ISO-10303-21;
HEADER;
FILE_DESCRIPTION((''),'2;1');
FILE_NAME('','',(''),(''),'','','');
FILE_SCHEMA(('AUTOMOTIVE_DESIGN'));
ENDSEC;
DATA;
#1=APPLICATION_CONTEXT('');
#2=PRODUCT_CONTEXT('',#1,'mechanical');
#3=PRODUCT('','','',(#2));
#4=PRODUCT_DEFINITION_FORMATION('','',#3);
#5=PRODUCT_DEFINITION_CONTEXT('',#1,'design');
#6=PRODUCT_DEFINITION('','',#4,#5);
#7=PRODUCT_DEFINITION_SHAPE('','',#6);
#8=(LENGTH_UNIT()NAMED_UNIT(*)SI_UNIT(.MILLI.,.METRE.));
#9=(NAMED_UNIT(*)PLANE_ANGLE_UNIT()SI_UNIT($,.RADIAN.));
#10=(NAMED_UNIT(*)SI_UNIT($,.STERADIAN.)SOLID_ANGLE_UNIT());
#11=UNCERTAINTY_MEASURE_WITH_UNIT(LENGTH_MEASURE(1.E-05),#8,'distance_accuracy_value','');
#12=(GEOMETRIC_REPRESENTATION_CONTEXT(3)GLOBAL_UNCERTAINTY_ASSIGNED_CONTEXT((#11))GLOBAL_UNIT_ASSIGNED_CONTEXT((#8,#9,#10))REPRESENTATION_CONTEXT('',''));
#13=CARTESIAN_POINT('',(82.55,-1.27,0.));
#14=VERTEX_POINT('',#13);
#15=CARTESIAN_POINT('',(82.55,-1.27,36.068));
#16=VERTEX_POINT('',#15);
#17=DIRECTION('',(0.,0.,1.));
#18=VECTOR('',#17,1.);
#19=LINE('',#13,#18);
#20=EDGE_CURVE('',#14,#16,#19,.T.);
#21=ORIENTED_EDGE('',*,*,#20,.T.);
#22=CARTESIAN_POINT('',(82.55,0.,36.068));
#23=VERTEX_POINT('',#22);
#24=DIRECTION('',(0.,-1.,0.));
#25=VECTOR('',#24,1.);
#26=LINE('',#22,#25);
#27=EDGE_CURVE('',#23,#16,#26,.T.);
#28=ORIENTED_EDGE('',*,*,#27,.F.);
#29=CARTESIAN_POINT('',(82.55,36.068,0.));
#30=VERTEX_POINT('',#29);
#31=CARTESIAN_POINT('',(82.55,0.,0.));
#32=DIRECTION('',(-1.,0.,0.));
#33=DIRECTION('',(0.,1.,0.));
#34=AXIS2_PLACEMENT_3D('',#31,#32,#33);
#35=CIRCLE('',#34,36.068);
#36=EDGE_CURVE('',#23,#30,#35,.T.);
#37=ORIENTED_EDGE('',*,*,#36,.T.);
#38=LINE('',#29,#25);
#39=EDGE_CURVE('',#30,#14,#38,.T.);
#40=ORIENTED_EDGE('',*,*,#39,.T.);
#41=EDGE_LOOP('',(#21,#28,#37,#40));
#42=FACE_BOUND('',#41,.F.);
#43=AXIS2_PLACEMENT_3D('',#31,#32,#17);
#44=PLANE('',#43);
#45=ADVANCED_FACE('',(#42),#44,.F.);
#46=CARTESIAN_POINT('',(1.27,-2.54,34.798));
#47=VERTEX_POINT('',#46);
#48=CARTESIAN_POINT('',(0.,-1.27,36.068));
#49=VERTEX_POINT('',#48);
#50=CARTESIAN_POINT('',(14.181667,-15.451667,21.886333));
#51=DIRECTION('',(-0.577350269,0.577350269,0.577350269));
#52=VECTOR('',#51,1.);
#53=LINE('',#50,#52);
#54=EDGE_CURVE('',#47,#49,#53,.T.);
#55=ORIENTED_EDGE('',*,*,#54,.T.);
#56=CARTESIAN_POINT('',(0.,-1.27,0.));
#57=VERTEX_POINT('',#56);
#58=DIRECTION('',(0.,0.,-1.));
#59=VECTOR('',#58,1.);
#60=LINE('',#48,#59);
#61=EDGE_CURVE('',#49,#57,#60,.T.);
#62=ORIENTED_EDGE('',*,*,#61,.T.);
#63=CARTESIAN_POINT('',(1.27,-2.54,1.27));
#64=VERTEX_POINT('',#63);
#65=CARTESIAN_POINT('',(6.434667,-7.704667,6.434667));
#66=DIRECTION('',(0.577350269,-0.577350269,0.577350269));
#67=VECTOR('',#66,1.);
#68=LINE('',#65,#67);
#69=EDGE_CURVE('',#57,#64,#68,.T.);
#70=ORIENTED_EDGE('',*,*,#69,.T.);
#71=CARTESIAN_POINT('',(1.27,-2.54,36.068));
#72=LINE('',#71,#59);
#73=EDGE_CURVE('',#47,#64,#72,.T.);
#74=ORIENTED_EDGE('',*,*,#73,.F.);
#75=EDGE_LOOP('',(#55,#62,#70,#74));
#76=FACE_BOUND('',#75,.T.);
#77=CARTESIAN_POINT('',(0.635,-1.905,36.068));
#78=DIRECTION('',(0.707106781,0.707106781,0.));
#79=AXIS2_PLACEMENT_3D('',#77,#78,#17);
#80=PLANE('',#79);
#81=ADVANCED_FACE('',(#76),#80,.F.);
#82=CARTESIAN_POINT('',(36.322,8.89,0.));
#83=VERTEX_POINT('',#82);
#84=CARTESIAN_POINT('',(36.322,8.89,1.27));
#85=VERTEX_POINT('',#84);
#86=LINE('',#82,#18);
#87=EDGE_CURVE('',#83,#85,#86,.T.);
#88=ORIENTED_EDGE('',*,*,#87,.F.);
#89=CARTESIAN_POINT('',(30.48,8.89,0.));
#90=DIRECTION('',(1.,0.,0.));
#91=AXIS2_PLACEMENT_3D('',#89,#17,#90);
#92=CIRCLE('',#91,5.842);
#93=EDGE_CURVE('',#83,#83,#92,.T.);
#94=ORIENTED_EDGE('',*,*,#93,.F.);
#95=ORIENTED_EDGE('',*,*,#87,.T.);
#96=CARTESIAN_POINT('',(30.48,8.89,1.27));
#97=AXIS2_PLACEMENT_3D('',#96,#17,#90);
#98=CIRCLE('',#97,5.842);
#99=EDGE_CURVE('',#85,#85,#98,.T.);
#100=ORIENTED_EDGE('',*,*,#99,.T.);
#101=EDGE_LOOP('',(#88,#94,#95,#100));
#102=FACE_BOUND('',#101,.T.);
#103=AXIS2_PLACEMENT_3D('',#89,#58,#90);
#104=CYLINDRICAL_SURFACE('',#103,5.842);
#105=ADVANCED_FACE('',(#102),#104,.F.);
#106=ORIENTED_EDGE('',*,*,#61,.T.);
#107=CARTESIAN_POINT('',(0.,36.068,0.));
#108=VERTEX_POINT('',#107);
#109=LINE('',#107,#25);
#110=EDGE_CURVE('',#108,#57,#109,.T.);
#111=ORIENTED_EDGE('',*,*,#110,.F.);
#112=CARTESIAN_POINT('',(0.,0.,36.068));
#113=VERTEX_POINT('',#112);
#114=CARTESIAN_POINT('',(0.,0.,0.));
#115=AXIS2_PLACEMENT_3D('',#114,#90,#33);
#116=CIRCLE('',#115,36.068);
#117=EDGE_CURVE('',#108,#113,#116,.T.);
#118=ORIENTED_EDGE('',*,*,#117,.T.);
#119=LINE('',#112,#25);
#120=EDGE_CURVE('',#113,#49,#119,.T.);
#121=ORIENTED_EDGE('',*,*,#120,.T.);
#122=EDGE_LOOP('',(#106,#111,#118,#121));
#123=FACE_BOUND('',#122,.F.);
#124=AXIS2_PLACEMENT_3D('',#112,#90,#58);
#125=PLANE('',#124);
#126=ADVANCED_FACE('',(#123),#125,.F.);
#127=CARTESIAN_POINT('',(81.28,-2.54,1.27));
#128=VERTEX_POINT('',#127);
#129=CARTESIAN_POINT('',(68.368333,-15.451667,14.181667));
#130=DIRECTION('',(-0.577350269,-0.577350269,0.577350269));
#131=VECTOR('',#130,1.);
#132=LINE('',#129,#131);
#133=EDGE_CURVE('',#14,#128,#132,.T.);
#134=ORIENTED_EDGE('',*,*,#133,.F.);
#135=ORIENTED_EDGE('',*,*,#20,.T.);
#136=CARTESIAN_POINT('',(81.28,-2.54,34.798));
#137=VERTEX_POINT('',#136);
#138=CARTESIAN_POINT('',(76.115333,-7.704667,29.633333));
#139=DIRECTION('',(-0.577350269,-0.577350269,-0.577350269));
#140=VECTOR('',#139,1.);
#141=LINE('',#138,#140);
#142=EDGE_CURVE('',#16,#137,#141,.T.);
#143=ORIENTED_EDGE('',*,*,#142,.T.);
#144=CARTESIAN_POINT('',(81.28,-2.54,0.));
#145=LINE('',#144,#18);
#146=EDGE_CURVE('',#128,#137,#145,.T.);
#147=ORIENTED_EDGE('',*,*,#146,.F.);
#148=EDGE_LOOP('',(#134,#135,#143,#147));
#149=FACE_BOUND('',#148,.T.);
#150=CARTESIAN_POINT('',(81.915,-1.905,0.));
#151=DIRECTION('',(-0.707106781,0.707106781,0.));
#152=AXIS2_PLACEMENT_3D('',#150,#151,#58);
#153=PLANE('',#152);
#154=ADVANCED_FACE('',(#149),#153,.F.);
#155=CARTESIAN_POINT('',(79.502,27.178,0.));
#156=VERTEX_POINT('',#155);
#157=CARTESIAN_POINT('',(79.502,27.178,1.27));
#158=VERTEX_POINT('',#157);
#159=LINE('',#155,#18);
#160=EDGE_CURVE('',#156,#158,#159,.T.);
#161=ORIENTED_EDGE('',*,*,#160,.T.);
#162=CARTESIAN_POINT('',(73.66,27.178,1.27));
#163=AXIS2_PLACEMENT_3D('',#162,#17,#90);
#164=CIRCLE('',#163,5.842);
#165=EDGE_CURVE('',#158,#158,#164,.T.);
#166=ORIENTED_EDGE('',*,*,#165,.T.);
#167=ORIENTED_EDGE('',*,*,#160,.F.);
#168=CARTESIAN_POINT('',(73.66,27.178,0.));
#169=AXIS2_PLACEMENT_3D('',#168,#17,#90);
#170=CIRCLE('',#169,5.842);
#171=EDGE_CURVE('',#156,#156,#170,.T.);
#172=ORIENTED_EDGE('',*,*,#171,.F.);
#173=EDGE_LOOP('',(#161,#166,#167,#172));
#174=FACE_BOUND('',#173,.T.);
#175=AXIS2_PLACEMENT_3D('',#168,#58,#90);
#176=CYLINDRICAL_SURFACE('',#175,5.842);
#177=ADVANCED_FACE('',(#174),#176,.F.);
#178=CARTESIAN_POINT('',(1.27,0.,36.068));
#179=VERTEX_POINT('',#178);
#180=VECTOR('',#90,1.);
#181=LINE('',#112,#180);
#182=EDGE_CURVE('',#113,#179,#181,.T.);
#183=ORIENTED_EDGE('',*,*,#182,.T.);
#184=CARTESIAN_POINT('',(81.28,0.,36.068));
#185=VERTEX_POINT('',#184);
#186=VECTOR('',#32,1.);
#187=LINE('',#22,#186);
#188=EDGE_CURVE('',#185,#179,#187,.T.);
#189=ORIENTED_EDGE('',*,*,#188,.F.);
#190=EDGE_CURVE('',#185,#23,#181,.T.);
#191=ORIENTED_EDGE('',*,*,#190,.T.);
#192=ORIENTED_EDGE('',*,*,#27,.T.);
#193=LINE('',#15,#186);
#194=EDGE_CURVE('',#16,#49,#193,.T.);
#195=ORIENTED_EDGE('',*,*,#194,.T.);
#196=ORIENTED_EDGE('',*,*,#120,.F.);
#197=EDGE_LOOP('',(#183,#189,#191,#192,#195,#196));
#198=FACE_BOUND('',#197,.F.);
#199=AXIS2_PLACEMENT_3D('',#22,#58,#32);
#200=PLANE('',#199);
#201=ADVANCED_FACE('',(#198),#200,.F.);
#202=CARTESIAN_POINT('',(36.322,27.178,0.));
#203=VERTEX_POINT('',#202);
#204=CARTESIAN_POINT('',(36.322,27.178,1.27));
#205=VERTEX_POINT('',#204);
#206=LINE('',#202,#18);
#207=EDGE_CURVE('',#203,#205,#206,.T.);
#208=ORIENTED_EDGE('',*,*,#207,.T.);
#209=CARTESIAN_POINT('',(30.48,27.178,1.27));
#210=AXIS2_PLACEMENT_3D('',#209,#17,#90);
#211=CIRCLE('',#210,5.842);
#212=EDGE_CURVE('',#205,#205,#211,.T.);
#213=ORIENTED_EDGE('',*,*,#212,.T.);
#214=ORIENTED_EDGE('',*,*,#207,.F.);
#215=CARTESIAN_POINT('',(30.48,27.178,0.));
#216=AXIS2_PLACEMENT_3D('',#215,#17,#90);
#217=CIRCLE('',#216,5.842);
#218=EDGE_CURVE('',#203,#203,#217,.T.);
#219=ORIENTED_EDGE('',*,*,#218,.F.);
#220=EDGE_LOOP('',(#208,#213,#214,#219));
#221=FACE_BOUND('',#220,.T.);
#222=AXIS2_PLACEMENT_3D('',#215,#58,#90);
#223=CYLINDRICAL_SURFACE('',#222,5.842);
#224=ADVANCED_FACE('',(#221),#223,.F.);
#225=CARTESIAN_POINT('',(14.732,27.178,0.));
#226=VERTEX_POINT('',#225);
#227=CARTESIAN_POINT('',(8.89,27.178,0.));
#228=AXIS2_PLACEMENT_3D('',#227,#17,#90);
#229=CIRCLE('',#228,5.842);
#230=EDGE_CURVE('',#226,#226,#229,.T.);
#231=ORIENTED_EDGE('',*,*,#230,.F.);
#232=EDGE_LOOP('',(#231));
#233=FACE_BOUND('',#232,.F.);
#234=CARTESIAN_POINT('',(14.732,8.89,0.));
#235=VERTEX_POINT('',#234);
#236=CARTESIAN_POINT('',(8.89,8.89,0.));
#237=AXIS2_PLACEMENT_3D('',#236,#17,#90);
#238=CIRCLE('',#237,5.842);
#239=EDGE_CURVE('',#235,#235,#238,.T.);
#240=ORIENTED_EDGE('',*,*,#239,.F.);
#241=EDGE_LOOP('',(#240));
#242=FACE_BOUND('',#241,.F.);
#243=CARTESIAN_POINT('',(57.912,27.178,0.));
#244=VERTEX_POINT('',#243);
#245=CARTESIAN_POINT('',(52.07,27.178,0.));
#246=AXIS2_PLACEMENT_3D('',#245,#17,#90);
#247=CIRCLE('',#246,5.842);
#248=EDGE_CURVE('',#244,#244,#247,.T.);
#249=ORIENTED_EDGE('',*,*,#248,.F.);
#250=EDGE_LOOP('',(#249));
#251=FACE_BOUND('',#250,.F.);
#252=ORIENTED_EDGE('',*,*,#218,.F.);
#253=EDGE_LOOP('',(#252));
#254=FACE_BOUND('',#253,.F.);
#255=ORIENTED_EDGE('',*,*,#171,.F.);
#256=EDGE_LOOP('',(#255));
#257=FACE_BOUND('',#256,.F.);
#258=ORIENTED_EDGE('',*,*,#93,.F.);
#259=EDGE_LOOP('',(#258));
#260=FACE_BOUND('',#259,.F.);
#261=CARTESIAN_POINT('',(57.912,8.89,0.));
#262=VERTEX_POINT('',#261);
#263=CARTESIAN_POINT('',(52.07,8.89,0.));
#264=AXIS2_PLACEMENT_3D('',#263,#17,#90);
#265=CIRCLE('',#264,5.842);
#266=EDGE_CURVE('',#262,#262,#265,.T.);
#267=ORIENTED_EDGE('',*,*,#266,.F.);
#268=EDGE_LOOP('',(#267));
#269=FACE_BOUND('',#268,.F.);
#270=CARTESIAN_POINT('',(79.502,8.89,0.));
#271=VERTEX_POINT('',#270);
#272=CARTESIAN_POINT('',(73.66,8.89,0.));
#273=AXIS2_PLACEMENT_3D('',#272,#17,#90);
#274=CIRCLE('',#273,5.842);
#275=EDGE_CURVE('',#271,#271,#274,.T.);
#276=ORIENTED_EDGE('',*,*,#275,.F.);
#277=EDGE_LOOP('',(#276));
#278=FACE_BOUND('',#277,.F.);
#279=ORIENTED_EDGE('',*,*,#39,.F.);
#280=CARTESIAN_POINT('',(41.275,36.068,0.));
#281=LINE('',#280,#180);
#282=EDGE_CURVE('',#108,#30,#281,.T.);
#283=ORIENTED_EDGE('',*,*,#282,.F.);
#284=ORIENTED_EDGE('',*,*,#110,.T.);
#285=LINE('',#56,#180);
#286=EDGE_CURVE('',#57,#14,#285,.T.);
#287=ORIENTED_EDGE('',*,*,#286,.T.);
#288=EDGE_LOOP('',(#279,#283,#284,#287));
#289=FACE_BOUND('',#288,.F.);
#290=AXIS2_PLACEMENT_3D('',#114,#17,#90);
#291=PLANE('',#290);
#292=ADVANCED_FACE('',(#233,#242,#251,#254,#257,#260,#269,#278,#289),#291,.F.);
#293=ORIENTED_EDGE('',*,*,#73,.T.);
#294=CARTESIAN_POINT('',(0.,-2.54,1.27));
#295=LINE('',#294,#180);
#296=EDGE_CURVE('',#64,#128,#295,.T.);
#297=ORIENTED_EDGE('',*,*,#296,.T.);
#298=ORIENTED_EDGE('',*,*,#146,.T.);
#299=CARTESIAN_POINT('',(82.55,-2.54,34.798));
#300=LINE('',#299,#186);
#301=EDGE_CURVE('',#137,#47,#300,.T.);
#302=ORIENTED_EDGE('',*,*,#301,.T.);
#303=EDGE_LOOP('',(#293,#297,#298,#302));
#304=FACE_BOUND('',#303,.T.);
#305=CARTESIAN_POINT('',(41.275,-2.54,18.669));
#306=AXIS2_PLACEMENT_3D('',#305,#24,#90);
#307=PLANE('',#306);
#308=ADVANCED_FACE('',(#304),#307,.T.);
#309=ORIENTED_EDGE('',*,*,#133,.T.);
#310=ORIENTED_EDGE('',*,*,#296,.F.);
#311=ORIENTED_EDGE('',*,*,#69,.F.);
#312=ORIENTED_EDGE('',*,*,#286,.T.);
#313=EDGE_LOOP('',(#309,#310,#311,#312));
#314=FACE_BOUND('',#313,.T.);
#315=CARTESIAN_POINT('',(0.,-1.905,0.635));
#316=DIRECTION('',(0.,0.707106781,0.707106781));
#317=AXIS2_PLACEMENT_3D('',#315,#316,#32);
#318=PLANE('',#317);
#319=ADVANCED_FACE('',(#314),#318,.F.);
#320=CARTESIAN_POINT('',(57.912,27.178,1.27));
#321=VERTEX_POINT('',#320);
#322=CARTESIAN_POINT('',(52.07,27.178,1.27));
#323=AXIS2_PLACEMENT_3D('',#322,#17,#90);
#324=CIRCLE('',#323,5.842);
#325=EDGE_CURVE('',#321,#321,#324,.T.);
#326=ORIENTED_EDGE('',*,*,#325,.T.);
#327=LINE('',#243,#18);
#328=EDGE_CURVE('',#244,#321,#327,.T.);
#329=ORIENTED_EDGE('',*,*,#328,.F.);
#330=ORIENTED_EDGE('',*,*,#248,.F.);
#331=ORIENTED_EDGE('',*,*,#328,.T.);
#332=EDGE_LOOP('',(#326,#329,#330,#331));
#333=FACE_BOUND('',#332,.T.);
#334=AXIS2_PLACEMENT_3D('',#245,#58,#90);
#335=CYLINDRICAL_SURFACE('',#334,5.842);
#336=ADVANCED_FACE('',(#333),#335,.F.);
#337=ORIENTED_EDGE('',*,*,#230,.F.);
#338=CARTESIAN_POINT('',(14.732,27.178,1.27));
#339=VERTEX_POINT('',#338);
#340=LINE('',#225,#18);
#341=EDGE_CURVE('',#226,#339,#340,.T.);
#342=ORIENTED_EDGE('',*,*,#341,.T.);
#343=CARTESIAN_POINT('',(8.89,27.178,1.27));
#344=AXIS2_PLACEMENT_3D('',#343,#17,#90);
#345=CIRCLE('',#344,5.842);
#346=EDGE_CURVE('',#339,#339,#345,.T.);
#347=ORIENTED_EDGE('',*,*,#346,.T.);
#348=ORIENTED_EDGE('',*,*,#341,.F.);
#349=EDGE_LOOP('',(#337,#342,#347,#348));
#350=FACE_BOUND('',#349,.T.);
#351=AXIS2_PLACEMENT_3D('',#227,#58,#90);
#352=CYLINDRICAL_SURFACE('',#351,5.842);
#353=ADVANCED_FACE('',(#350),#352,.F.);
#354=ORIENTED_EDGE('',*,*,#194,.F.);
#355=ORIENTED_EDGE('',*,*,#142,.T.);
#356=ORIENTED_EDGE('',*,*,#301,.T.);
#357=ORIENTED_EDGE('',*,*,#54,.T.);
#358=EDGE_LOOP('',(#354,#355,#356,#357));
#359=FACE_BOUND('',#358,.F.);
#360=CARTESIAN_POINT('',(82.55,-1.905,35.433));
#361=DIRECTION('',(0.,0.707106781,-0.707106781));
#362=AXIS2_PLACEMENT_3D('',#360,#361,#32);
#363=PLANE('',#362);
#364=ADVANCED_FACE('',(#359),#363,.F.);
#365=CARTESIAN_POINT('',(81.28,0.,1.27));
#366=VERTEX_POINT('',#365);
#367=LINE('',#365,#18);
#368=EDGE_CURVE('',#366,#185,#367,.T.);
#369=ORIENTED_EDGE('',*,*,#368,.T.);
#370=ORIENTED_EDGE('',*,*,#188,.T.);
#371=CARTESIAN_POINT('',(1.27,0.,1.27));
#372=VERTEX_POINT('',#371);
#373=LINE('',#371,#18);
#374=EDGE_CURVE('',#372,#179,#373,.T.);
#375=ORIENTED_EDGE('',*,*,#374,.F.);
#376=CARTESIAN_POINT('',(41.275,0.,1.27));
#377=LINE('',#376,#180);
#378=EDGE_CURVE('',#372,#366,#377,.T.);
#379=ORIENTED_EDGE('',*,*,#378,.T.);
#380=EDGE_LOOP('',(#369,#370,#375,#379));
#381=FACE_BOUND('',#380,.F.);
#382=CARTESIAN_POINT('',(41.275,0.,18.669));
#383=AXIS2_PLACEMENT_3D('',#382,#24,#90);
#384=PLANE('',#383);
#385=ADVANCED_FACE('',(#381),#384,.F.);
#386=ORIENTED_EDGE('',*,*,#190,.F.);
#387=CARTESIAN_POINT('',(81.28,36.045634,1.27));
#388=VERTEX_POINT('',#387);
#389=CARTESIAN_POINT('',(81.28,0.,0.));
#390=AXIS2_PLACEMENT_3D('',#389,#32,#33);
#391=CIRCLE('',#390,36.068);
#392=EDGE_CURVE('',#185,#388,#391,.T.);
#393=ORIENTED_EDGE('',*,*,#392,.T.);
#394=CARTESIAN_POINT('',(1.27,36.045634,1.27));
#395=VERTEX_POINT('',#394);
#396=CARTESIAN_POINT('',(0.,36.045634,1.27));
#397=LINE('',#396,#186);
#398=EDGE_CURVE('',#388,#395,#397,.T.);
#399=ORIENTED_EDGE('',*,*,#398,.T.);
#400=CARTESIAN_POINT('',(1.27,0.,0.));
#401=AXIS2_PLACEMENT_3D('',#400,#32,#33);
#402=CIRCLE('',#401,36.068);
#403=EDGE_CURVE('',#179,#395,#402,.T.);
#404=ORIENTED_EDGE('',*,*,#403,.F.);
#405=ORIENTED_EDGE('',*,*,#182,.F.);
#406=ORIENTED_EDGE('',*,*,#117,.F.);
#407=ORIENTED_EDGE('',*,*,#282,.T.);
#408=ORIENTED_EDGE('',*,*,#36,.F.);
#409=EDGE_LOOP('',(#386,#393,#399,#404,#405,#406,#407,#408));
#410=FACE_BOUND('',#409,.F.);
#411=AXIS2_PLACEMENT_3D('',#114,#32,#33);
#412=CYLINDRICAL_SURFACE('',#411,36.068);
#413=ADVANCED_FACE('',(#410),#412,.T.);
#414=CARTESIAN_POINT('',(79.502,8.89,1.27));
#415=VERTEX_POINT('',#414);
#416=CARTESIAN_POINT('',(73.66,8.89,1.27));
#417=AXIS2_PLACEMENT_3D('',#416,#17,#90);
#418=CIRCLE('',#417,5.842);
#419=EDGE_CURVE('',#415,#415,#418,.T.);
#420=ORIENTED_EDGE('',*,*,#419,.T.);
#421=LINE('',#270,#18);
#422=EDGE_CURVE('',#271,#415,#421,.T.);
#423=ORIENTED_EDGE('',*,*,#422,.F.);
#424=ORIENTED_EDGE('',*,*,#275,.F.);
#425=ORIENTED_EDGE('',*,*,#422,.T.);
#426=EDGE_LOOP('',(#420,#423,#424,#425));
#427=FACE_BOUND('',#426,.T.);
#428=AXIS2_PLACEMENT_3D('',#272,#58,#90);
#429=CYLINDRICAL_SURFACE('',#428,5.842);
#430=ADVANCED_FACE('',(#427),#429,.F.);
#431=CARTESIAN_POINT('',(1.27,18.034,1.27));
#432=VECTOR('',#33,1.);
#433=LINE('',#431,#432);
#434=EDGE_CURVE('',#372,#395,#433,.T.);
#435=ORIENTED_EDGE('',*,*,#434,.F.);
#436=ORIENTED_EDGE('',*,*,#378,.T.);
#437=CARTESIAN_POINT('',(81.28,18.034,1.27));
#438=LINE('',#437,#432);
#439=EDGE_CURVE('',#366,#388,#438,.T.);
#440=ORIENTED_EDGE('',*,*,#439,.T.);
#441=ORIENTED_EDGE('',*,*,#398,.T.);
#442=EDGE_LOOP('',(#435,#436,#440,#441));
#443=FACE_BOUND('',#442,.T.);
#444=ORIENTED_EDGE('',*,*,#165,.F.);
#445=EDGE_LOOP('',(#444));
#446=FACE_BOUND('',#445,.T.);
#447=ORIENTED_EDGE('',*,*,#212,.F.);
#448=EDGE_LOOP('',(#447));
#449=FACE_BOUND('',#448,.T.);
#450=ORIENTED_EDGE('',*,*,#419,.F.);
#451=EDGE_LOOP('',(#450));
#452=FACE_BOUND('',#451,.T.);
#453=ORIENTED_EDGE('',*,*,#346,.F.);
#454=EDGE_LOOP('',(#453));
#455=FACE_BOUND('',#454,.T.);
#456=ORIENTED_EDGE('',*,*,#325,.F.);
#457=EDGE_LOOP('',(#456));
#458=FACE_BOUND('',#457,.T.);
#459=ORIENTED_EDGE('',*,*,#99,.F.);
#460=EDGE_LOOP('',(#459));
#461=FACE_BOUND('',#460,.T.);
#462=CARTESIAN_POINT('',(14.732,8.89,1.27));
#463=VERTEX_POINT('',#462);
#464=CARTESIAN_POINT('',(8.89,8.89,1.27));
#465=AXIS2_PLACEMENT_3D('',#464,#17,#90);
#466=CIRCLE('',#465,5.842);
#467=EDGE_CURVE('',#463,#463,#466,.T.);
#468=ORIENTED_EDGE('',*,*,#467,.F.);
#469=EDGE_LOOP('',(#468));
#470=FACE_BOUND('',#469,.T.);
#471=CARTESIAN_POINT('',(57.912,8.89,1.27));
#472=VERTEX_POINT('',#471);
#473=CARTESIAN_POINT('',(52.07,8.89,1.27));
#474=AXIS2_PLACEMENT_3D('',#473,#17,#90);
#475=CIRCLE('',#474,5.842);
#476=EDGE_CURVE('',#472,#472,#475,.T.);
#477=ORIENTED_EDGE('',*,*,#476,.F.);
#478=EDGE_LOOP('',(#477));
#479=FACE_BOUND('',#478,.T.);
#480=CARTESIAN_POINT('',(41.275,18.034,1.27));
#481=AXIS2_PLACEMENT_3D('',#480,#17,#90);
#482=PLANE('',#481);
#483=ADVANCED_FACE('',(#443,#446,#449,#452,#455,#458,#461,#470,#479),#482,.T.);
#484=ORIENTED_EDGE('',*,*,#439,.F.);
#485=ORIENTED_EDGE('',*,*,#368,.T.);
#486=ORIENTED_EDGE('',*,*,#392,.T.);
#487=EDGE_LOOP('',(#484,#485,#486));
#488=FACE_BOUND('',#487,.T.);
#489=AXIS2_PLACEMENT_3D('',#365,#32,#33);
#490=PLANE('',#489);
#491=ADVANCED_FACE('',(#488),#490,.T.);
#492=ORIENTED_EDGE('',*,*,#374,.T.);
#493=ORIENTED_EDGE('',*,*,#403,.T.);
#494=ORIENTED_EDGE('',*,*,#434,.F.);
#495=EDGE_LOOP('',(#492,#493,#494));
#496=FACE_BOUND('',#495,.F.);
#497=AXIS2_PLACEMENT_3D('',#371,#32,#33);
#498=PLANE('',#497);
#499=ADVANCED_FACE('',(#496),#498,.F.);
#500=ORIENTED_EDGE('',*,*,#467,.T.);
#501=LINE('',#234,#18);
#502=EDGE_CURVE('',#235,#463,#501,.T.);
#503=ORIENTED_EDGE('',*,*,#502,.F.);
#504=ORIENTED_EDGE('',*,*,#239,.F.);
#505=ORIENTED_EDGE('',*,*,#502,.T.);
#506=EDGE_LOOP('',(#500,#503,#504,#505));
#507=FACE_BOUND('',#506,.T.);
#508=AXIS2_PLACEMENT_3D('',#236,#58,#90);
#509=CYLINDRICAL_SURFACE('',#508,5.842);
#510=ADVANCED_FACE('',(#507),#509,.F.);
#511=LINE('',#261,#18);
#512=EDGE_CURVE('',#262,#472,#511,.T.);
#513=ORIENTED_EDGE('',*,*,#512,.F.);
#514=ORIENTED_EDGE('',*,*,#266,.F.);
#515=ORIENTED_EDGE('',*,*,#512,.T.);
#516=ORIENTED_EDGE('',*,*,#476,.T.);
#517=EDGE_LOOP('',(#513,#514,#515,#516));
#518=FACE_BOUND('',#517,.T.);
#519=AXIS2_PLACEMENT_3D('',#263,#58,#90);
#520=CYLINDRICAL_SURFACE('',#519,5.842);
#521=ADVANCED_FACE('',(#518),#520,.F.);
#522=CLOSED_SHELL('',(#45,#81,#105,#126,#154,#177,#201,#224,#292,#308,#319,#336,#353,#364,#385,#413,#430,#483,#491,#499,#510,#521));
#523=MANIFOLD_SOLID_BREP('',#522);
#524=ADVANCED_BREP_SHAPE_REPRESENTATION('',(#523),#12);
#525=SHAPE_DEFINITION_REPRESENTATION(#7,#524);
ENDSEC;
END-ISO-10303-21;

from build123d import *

# Parameters (mm, degrees)
F0_W     = 82.55
F0_H     = 36.068
F0_R     = 5.842
F1_DEPTH = 1.27
F2_W     = 1.27
F2_H     = 36.068
F3_DEPTH = 50.8
F5_DEPTH = 101.6
F6_W     = 80.01
F6_H     = 34.798
F7_DEPTH = 2.54
F9_SIZE  = 1.27


with BuildPart() as f1:
    # F0 (on Top) → F1 (new body)
    with BuildSketch(Plane.XY):
        with Locations((41.275, 18.034)):
            Rectangle(F0_W, F0_H)
        with Locations((8.89, 8.89)):
            Circle(F0_R, mode=Mode.SUBTRACT)
        with Locations((30.48, 8.89)):
            Circle(F0_R, mode=Mode.SUBTRACT)
        with Locations((52.07, 8.89)):
            Circle(F0_R, mode=Mode.SUBTRACT)
        with Locations((73.66, 8.89)):
            Circle(F0_R, mode=Mode.SUBTRACT)
        with Locations((8.89, 27.178)):
            Circle(F0_R, mode=Mode.SUBTRACT)
        with Locations((30.48, 27.178)):
            Circle(F0_R, mode=Mode.SUBTRACT)
        with Locations((52.07, 27.178)):
            Circle(F0_R, mode=Mode.SUBTRACT)
        with Locations((73.66, 27.178)):
            Circle(F0_R, mode=Mode.SUBTRACT)
    extrude(amount=F1_DEPTH)

    # F2 (on face) → F3 (join)
    with BuildSketch(Plane.XY.offset(1.27)):
        with Locations((0.635, 18.034)):
            Rectangle(F2_W, F2_H)
        with Locations((81.915, 18.034)):
            Rectangle(F2_W, F2_H)
    extrude(amount=F3_DEPTH)

    # F4 (on face) → F5 (cut)
    with BuildSketch(Plane(origin=(0, 0, 0), x_dir=(0, -1, 0), z_dir=(-1, 0, 0))):
        with BuildLine():
            Line((-36.068, 52.07), (-36.068, 0))
            ThreePointArc((-36.068, 0), (-25.5039273838, 25.5039273838), (0, 36.068))
            Line((0, 36.068), (0, 52.07))
            Line((0, 52.07), (-36.068, 52.07))
        make_face()
    extrude(amount=-F5_DEPTH, mode=Mode.SUBTRACT)


with BuildPart() as f7:
    # F6 (on face) → F7 (new body)
    with BuildSketch(Plane.XZ):
        with Locations((41.275, 18.669)):
            Rectangle(F6_W, F6_H)
        Polygon((0, 36.068), (0, 0), (82.55, 0), (82.55, 36.068), (81.28, 36.068), (81.28, 1.27), (1.27, 1.27), (1.27, 36.068), align=None)
    extrude(amount=F7_DEPTH)


with BuildPart() as f1_1:
    add(f1.part)

    # F8: union F7
    add(f7.part)

    # F9
    f9_edges = [f1_1.edges().sort_by_distance(p)[0] for p in [
        (82.55, -2.54, 18.034),
        (41.275, -2.54, 36.068),
        (41.275, -2.54, 0),
        (0, -2.54, 18.034),
    ]]
    chamfer(f9_edges, length=F9_SIZE)


solid = f1_1.part
